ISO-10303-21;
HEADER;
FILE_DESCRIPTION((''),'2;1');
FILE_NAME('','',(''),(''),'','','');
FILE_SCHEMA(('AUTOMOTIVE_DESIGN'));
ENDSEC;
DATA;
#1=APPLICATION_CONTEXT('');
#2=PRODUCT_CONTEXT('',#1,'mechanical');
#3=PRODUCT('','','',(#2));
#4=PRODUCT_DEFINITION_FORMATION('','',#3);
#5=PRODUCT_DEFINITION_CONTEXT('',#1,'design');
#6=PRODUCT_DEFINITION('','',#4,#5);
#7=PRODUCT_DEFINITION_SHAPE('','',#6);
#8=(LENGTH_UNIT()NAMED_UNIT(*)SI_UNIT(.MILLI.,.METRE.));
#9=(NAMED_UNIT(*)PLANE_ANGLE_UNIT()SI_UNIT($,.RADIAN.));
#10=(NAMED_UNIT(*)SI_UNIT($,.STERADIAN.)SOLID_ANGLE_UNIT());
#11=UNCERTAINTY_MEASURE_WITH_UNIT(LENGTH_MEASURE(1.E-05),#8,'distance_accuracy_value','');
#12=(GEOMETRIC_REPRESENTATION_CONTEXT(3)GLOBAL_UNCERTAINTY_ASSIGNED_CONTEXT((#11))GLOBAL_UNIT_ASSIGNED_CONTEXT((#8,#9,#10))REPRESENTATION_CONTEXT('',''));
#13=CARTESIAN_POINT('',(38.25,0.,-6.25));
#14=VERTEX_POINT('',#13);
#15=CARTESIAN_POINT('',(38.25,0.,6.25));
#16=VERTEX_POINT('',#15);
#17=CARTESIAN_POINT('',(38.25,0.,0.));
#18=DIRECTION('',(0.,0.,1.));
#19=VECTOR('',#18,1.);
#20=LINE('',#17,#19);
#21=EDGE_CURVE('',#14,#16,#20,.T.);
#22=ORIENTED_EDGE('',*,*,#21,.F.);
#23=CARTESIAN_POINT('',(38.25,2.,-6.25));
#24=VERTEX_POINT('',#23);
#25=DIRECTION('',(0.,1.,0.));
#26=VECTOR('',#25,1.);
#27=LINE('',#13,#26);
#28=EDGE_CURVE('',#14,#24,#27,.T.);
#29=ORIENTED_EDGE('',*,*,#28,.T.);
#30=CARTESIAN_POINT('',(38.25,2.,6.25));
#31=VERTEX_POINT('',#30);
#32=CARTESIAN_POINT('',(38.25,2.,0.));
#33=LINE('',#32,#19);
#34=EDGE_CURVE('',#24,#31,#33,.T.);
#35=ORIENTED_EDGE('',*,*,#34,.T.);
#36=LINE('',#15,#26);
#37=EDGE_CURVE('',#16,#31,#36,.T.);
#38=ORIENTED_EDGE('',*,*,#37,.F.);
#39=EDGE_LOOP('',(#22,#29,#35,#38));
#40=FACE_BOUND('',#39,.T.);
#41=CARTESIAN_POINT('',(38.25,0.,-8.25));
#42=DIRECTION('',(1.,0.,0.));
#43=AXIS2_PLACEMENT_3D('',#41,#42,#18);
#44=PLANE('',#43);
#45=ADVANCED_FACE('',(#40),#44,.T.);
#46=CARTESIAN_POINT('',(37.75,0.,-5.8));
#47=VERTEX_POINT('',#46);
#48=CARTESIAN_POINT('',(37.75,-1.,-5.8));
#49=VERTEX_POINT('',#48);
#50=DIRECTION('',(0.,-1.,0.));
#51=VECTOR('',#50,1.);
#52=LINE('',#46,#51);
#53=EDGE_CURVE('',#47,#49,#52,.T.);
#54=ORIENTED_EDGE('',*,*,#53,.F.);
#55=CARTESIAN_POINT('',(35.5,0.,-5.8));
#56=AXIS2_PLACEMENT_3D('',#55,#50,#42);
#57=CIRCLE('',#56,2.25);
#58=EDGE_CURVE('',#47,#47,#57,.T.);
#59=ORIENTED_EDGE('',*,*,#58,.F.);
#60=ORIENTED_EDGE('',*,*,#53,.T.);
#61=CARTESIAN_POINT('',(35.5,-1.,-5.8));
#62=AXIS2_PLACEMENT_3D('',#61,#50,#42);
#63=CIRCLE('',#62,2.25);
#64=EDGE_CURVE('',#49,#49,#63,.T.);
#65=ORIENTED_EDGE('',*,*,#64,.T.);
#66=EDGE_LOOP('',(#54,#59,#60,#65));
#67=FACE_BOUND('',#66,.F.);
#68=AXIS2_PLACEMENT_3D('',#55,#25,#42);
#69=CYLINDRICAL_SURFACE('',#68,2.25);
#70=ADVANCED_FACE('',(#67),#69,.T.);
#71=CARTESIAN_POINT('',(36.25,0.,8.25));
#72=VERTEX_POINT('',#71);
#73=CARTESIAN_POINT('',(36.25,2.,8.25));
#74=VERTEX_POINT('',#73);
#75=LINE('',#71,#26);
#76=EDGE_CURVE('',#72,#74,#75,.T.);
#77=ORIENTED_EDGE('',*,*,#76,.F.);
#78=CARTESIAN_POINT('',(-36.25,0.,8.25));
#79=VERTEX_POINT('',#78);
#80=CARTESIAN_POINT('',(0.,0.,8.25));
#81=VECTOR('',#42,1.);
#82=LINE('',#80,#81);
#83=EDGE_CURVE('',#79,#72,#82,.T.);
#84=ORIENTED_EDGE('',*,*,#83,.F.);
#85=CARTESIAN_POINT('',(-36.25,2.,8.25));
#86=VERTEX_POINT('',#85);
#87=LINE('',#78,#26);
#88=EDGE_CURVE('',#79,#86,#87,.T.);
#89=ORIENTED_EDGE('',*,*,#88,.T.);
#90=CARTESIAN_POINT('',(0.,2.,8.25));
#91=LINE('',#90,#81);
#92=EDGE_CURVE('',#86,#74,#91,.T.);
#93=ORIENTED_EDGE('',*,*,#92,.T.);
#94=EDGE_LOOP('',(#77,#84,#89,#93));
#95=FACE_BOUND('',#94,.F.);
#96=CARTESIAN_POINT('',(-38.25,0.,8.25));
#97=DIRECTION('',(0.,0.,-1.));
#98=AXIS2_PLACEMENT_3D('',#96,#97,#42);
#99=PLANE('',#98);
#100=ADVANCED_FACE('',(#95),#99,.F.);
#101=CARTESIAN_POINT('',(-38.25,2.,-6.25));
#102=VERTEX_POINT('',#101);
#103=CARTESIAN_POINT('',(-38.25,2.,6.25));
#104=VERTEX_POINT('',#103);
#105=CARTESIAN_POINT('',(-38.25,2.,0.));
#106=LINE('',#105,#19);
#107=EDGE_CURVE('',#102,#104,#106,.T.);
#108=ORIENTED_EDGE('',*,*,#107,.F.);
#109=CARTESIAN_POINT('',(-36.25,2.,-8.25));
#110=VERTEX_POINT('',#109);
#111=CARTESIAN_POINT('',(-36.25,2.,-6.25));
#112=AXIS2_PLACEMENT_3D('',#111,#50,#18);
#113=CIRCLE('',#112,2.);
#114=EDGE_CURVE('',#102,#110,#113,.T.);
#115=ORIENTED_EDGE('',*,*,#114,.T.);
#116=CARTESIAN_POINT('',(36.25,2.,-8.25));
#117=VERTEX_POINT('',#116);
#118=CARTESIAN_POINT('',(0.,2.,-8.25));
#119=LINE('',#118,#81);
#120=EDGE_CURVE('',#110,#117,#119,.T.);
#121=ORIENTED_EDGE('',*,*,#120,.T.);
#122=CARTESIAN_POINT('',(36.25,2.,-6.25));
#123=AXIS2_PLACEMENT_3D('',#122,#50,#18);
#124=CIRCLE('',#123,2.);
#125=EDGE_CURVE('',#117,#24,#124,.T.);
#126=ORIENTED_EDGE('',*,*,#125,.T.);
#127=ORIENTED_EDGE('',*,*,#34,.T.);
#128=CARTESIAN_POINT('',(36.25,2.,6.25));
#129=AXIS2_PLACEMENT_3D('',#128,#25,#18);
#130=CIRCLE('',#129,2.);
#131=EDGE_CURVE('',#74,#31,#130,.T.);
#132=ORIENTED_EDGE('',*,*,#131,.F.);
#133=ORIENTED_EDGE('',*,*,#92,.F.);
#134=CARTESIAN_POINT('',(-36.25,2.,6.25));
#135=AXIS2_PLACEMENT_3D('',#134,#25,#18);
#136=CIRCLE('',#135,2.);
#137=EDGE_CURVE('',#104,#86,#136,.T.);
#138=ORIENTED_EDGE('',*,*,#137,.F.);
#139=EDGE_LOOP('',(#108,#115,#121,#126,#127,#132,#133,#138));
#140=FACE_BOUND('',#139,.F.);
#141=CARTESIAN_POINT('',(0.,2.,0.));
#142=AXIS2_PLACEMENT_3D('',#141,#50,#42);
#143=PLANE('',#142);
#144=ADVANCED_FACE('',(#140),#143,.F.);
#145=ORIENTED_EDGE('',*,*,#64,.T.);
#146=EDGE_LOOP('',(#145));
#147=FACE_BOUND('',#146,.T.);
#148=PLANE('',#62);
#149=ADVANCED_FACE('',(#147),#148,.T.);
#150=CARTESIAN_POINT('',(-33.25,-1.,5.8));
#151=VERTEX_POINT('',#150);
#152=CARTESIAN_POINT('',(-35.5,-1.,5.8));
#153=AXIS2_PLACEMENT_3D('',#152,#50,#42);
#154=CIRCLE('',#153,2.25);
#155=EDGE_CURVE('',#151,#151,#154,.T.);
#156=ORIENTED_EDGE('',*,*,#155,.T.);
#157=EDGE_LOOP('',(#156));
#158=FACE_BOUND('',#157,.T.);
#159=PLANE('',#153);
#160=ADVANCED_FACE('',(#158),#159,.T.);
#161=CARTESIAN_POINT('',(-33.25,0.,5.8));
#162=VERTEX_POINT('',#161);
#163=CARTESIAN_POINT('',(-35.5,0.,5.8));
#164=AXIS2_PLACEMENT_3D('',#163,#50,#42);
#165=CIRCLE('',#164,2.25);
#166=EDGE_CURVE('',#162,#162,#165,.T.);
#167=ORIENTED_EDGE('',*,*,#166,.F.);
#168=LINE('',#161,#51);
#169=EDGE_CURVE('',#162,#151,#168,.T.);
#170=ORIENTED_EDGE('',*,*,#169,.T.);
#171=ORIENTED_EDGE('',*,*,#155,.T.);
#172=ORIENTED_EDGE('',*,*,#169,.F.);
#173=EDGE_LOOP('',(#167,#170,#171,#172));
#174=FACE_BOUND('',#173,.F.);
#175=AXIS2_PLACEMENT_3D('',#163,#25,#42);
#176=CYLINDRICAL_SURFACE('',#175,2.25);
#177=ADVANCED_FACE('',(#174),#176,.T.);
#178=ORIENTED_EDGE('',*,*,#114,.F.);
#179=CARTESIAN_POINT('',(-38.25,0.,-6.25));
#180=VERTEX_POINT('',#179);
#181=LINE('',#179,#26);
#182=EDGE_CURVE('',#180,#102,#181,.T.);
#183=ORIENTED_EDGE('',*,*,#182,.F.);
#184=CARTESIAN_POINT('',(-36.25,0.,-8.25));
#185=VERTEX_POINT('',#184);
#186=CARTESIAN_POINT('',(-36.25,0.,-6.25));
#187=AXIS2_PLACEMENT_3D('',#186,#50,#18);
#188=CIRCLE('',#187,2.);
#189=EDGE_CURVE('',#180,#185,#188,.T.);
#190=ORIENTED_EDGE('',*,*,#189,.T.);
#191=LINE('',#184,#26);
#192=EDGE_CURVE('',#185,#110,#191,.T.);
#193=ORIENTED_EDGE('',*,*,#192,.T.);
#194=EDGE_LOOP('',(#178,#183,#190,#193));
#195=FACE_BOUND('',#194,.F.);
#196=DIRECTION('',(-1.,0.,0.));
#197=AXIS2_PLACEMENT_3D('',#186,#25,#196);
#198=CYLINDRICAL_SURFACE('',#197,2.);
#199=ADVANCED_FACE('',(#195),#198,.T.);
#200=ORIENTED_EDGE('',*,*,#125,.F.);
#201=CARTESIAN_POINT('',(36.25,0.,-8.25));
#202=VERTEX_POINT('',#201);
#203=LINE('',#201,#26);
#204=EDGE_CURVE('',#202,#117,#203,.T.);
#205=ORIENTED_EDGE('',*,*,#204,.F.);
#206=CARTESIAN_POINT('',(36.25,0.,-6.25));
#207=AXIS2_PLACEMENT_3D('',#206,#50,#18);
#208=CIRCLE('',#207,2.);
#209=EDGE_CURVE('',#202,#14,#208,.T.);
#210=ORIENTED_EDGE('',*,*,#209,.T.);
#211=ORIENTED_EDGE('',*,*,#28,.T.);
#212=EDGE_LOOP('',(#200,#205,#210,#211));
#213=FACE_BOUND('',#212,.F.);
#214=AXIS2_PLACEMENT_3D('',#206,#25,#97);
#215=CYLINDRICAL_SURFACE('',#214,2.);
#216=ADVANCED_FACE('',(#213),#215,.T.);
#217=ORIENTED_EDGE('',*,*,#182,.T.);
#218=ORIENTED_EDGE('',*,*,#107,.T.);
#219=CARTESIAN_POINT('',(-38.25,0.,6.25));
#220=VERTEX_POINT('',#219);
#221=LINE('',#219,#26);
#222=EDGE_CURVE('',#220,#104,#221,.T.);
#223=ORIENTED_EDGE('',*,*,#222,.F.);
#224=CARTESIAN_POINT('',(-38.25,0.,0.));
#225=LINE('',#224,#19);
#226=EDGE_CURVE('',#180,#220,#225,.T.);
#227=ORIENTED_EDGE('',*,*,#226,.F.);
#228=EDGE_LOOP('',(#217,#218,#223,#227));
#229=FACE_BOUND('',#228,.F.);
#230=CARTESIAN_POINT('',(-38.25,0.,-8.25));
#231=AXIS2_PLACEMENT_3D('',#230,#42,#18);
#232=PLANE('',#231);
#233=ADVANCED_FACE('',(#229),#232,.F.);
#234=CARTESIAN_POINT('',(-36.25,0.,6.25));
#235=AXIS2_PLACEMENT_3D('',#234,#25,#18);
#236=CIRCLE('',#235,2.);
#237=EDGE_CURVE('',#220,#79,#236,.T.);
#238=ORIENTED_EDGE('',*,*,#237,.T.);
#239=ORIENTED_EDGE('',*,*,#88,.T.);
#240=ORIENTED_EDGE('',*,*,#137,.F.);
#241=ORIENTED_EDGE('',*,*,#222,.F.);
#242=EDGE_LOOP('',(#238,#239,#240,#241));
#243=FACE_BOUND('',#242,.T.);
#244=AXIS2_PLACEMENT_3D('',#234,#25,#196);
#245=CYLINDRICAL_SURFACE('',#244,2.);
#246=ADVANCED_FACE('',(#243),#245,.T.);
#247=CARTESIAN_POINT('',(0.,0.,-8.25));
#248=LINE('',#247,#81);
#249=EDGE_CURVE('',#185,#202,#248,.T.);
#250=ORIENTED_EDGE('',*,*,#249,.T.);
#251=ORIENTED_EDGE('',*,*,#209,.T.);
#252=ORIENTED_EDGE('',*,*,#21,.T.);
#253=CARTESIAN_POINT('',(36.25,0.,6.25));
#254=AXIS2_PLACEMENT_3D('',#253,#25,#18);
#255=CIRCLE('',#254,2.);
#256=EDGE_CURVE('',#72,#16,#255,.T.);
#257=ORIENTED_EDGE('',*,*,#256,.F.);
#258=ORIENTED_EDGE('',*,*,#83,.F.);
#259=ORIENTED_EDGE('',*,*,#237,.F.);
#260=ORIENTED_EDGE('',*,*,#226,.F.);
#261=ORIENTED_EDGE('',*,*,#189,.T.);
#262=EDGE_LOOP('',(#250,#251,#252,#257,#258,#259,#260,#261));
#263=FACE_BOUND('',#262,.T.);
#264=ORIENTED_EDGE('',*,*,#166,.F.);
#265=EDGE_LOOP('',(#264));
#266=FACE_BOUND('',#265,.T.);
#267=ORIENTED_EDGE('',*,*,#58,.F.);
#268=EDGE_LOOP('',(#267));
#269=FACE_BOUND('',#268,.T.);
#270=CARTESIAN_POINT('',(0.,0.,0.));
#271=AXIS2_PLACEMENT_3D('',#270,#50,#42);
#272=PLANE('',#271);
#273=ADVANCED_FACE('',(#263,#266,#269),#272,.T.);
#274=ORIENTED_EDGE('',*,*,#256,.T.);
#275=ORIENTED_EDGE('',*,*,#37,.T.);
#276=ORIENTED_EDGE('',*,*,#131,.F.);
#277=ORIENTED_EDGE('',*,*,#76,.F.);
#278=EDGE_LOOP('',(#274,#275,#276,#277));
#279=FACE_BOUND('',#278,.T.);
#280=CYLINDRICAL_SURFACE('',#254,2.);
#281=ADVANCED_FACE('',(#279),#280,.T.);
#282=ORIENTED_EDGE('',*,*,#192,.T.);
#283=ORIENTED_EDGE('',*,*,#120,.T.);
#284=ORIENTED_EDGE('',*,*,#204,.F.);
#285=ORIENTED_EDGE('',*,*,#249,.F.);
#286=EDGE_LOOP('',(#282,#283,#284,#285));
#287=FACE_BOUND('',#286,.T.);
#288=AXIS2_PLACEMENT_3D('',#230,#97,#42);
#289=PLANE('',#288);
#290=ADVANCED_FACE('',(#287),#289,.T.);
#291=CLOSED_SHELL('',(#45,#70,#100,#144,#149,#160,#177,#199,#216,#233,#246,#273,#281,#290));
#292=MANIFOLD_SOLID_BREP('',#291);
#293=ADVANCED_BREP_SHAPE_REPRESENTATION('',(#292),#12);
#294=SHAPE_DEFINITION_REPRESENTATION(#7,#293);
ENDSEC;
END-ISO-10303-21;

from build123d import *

# Parameters (mm, degrees)
F0_W     = 76.5
F0_H     = 16.5
F2_DEPTH = 2
F1_R     = 2.25
F3_DEPTH = 1
F4_R     = 2


with BuildPart() as f2:
    # F0 (on Front) → F2 (new body)
    with BuildSketch(Plane.XZ):
        Rectangle(F0_W, F0_H)
    extrude(amount=-F2_DEPTH)

    # F1 (on Front) → F3 (join)
    with BuildSketch(Plane.XZ):
        with Locations((-35.5, 5.8)):
            Circle(F1_R)
        with Locations((35.5, -5.8)):
            Circle(F1_R)
    extrude(amount=F3_DEPTH)

    # F4
    f4_edges = [f2.edges().sort_by_distance(p)[0] for p in [
        (38.25, 1, -8.25),
        (38.25, 1, 8.25),
        (-38.25, 1, -8.25),
        (-38.25, 1, 8.25),
    ]]
    fillet(f4_edges, radius=F4_R)


solid = f2.part
